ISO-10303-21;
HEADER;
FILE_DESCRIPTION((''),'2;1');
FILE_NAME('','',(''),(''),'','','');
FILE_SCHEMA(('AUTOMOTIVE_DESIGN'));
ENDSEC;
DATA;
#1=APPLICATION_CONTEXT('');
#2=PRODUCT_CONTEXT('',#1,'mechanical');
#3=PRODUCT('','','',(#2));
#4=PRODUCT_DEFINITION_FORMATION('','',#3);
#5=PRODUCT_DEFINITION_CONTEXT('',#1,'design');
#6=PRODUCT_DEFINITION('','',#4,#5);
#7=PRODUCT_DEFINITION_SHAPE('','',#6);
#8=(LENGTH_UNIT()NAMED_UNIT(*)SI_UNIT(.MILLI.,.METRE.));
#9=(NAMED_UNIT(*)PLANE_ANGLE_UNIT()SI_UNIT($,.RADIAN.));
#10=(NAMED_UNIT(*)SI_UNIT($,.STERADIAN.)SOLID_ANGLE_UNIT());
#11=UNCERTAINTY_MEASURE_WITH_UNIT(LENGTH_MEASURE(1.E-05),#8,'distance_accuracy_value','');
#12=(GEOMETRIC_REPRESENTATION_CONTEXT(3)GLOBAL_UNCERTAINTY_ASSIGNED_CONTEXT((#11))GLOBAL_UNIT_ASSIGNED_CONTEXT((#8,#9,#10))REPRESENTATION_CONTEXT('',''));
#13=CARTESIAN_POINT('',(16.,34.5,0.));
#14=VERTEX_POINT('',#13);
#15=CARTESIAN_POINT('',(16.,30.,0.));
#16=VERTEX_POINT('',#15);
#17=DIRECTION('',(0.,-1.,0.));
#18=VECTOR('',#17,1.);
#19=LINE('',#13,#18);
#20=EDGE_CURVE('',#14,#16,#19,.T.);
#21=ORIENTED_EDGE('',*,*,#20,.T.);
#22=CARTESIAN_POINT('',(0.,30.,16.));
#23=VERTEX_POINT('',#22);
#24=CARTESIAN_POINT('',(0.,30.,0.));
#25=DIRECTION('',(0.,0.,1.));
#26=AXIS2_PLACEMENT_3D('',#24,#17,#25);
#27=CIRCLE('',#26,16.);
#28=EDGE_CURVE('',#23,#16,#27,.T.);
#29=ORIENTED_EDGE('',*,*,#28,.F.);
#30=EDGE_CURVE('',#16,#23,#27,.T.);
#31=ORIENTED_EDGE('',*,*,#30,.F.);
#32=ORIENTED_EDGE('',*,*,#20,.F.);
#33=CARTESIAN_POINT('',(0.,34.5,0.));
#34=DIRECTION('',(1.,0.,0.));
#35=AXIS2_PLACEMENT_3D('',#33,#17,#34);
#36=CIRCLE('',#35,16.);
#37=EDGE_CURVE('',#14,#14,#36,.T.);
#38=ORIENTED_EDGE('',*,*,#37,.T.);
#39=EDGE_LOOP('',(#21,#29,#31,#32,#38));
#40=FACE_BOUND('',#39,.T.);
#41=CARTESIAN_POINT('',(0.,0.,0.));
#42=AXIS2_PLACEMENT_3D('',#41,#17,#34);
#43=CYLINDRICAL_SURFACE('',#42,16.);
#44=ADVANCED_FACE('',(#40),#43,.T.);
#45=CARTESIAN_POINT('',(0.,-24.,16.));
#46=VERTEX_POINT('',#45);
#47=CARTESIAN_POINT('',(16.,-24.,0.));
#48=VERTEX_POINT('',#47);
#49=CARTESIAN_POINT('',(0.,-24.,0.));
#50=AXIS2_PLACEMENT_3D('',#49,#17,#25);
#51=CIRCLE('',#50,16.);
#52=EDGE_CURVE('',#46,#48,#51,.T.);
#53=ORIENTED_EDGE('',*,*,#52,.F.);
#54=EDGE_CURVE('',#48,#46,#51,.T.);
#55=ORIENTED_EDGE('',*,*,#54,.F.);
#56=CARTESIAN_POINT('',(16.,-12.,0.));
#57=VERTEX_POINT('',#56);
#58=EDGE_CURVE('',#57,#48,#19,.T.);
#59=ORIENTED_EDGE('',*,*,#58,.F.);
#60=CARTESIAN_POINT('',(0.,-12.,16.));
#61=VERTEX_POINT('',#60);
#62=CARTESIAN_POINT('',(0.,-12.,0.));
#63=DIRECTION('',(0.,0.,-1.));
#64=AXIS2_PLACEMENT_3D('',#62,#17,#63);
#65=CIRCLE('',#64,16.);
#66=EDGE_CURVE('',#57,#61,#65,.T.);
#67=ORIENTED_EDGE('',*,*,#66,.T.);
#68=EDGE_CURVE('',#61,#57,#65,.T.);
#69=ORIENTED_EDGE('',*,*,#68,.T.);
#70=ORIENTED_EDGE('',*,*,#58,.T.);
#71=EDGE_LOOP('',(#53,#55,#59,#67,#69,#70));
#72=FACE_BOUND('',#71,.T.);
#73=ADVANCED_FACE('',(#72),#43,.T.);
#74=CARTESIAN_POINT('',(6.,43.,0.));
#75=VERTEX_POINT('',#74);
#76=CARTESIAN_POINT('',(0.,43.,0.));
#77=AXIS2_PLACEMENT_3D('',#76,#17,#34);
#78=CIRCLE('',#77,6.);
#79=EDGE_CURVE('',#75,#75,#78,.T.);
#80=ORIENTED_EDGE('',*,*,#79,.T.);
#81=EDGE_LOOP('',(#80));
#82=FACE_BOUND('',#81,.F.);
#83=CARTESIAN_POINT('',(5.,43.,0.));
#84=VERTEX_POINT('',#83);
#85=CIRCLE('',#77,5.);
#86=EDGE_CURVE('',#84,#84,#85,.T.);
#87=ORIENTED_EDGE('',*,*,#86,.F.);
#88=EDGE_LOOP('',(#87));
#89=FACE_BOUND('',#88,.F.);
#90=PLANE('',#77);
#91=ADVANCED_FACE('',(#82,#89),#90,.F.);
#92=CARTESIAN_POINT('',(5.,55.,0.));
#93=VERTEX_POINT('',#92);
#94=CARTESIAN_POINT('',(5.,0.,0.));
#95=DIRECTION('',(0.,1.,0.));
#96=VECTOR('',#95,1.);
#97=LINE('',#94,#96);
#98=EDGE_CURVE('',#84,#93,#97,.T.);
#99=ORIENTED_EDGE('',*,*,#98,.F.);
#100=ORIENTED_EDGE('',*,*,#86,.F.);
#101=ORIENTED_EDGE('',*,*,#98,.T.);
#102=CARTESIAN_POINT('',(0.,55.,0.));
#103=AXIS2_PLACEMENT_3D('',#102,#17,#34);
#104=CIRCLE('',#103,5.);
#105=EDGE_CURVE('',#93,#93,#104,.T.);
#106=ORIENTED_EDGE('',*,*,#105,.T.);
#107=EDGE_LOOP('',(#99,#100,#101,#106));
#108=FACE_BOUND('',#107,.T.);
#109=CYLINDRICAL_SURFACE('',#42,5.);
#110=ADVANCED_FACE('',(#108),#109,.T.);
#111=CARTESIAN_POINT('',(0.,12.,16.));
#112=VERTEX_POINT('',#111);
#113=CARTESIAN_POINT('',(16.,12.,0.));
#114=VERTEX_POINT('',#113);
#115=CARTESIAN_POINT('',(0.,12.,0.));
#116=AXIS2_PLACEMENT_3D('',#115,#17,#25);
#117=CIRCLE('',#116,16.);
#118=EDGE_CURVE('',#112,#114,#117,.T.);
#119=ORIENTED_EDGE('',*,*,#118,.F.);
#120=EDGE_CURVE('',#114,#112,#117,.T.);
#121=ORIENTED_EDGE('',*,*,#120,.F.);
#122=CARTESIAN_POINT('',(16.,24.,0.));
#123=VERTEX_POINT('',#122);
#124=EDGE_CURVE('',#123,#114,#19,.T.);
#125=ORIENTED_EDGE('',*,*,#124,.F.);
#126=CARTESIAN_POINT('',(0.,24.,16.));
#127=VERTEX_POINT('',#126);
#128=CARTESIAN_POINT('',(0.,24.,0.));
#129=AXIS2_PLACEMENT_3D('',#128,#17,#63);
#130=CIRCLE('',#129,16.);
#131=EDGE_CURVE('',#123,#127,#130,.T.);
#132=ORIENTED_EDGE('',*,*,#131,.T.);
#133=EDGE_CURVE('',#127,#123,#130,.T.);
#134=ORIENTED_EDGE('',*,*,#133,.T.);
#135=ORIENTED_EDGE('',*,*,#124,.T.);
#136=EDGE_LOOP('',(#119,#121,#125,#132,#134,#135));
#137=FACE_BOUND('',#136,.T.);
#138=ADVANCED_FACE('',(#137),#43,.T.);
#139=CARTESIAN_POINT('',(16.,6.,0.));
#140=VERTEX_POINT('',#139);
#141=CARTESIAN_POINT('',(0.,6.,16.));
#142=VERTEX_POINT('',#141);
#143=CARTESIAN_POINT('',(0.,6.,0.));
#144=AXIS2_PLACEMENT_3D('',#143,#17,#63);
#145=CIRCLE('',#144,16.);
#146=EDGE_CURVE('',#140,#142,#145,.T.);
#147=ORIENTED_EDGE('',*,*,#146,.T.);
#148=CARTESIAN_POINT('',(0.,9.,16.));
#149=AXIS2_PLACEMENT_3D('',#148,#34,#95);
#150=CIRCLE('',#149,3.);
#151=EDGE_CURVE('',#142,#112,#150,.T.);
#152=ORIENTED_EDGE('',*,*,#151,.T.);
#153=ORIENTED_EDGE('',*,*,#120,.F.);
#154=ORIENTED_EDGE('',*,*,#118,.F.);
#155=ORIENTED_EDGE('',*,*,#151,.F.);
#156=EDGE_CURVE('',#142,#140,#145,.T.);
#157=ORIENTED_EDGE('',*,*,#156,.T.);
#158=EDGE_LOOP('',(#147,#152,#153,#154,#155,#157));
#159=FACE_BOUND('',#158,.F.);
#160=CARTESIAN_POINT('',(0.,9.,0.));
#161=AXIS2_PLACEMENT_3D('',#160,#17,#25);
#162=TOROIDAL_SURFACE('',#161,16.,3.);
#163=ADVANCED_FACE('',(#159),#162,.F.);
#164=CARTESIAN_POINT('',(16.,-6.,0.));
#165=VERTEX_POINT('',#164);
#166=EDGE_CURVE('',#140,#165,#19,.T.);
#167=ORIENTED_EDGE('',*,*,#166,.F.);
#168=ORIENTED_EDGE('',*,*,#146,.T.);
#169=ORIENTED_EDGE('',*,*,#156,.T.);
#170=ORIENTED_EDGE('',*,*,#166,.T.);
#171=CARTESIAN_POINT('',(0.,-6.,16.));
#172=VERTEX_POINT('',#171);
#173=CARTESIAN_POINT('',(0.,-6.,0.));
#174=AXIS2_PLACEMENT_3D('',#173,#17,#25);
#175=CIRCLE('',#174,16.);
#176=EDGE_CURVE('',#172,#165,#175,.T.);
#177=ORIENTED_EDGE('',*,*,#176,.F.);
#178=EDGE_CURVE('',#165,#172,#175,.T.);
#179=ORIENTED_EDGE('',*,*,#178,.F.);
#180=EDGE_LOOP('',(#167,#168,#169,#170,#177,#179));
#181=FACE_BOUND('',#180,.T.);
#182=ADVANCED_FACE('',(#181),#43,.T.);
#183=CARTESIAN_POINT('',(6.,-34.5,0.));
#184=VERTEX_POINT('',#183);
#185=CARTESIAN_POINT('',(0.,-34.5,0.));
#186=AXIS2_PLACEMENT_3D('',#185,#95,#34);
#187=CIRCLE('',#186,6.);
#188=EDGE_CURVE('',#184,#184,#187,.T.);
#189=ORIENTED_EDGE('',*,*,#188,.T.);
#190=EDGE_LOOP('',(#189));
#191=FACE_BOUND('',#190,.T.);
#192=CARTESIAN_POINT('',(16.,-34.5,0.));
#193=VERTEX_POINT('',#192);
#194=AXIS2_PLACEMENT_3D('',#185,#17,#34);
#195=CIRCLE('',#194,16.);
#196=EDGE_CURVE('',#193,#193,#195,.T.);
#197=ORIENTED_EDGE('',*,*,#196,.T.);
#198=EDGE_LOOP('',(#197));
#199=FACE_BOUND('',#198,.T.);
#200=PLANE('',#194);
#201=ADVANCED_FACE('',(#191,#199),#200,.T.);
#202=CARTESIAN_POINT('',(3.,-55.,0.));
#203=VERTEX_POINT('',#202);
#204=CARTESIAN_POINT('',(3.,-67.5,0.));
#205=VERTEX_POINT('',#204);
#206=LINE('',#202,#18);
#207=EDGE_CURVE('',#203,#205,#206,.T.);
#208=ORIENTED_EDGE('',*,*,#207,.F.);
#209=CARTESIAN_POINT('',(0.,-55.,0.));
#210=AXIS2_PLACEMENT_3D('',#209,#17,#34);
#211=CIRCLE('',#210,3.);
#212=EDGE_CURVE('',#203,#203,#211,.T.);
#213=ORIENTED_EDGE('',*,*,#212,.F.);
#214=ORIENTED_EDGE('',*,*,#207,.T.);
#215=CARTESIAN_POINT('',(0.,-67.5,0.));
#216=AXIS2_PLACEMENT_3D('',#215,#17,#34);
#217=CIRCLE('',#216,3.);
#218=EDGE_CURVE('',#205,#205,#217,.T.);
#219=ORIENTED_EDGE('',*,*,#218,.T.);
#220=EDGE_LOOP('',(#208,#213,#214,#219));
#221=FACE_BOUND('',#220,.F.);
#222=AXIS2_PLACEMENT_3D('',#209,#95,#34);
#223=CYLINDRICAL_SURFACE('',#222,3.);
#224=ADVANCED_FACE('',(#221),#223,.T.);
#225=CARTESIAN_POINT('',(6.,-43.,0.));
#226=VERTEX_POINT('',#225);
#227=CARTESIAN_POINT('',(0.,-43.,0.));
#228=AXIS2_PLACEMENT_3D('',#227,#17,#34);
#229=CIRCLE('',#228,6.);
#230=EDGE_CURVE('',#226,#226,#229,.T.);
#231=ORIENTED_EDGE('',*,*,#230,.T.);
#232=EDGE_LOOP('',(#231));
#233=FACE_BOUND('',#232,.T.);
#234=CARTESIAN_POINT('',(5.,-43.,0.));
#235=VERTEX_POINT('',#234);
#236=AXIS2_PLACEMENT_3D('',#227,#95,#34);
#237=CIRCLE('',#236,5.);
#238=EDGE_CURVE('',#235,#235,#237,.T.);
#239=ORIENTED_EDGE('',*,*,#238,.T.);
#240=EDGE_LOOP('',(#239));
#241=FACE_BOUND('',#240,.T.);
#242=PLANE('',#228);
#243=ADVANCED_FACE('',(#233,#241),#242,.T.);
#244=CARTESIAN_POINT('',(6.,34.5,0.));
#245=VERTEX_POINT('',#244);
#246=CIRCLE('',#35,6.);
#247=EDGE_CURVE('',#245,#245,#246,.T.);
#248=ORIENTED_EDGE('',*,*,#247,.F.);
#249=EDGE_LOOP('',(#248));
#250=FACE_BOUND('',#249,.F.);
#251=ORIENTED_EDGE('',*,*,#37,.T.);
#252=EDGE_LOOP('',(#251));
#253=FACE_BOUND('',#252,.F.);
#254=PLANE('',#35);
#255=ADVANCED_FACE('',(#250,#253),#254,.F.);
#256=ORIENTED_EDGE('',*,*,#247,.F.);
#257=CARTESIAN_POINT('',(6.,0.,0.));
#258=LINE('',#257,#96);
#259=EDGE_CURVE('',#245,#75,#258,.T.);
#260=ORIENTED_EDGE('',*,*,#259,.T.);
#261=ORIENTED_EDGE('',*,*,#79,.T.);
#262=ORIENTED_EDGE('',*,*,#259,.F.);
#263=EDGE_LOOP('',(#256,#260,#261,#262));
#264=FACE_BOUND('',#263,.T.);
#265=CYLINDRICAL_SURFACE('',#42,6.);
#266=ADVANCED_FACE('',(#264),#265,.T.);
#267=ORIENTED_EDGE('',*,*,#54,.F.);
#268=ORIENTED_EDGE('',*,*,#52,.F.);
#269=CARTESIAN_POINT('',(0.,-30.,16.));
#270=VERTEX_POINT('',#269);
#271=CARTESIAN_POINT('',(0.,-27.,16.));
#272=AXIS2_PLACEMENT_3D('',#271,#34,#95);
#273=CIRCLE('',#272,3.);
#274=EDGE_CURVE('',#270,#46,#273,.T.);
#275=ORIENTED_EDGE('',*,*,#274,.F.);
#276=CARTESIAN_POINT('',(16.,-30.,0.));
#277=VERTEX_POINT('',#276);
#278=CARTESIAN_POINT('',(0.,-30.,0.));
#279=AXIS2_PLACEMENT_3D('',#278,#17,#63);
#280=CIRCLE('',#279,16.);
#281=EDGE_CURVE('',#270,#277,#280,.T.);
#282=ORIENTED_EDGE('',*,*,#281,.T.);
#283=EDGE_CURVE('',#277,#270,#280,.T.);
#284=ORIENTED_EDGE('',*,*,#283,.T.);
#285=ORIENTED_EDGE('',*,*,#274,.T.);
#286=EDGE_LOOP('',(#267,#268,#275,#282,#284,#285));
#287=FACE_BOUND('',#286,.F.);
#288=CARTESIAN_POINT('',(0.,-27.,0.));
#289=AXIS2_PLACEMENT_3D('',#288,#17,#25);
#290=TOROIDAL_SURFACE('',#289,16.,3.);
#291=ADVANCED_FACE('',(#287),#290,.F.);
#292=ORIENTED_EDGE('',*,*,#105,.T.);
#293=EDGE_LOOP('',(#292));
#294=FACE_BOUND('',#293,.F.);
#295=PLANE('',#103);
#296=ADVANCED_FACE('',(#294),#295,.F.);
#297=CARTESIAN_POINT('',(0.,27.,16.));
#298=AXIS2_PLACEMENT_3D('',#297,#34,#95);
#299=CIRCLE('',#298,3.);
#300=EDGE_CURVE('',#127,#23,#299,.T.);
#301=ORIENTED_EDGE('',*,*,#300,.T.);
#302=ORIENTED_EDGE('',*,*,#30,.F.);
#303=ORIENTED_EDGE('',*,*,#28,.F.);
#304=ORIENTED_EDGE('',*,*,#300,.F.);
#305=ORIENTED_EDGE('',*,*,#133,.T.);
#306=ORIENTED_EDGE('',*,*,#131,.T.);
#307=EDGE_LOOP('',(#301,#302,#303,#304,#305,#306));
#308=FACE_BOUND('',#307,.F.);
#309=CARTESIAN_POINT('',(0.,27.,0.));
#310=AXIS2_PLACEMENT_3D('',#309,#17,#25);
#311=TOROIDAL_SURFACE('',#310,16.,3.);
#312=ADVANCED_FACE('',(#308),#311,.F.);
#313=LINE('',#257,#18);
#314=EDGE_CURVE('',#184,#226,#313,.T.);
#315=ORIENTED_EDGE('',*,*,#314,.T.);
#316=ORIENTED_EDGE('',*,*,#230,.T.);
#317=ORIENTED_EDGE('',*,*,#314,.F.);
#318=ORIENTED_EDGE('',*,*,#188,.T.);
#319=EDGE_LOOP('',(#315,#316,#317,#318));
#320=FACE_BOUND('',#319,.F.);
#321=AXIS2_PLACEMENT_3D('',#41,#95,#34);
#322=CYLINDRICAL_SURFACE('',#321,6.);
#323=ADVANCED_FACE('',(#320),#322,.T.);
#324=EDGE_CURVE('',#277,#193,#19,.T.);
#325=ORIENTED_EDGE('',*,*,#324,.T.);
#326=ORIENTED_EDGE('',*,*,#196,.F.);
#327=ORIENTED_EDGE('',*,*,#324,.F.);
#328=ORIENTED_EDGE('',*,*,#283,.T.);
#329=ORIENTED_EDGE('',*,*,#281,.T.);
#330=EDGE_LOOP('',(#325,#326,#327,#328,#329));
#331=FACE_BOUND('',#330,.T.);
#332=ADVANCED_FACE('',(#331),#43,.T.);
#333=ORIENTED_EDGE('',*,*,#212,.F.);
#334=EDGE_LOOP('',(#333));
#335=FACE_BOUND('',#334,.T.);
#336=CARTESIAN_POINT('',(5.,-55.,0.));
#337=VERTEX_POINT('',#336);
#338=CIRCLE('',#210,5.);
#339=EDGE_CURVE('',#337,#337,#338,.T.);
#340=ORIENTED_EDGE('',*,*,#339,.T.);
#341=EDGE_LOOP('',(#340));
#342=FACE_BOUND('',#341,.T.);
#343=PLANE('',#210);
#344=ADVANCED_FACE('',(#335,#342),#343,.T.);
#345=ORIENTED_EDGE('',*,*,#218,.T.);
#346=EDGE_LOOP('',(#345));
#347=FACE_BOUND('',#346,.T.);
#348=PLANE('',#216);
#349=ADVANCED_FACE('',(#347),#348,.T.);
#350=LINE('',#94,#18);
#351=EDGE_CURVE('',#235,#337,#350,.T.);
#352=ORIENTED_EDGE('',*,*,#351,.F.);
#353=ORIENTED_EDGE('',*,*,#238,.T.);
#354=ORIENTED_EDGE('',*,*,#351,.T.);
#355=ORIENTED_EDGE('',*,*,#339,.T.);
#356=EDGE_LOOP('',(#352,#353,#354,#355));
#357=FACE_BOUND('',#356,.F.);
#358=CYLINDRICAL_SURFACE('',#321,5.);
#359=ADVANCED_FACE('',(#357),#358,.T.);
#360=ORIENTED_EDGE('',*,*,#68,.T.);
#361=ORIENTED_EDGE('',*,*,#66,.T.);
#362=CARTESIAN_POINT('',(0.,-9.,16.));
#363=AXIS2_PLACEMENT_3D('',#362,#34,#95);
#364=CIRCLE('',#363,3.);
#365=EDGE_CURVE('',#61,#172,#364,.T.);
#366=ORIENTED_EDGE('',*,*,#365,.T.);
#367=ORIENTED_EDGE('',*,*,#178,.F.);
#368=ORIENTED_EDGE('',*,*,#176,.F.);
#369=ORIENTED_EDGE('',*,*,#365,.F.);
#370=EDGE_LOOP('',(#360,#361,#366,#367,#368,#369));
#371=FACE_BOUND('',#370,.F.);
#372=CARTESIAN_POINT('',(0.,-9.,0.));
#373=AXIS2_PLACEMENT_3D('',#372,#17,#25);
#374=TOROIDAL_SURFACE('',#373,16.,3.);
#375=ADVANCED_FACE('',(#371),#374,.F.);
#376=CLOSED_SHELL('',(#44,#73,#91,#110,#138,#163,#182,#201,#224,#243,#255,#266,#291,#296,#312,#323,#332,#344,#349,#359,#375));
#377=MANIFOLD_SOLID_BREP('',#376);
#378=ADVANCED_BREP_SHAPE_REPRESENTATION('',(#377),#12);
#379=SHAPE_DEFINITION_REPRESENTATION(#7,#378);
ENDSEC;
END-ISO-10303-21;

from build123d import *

# Parameters (mm, degrees)
F0_R          = 16
F1_DEPTH      = 34.5
F2_R          = 3
F4_R          = 6
F5_DEPTH      = 43
F5_DEPTH_BACK = 43
F6_R          = 5
F7_DEPTH      = 55
F7_DEPTH_BACK = 55
F8_R          = 3
F9_DEPTH      = 12.5


# Not quite as in the source:
# - a feature names something its author has since deleted; it is built from what else it names


with BuildPart() as f1:
    # F0 (on Front) → F1 (new body, symmetric)
    with BuildSketch(Plane.XZ):
        Circle(F0_R)
    extrude(amount=F1_DEPTH, both=True)

    # F2 (on Right) → F3 (revolve, cut)
    with BuildSketch(Plane.YZ):
        with Locations((-27, 16)):
            Circle(F2_R)
        with Locations((-9, 16)):
            Circle(F2_R)
        with Locations((9, 16)):
            Circle(F2_R)
        with Locations((27, 16)):
            Circle(F2_R)
    revolve(axis=Axis((0, -34.5, 0), (0, -1, 0)), mode=Mode.SUBTRACT)

    # F4 (on Front) → F5 (join, two sides)
    with BuildSketch(Plane.XZ) as f5_sk:
        Circle(F4_R)
    extrude(amount=F5_DEPTH)
    extrude(f5_sk.sketch, amount=-F5_DEPTH_BACK)

    # F6 (on Front) → F7 (join, two sides)
    with BuildSketch(Plane.XZ) as f7_sk:
        Circle(F6_R)
    extrude(amount=F7_DEPTH)
    extrude(f7_sk.sketch, amount=-F7_DEPTH_BACK)

    # F8 (on face) → F9 (join)
    with BuildSketch(Plane.XZ.offset(55)):
        Circle(F8_R)
    extrude(amount=F9_DEPTH)


solid = f1.part
